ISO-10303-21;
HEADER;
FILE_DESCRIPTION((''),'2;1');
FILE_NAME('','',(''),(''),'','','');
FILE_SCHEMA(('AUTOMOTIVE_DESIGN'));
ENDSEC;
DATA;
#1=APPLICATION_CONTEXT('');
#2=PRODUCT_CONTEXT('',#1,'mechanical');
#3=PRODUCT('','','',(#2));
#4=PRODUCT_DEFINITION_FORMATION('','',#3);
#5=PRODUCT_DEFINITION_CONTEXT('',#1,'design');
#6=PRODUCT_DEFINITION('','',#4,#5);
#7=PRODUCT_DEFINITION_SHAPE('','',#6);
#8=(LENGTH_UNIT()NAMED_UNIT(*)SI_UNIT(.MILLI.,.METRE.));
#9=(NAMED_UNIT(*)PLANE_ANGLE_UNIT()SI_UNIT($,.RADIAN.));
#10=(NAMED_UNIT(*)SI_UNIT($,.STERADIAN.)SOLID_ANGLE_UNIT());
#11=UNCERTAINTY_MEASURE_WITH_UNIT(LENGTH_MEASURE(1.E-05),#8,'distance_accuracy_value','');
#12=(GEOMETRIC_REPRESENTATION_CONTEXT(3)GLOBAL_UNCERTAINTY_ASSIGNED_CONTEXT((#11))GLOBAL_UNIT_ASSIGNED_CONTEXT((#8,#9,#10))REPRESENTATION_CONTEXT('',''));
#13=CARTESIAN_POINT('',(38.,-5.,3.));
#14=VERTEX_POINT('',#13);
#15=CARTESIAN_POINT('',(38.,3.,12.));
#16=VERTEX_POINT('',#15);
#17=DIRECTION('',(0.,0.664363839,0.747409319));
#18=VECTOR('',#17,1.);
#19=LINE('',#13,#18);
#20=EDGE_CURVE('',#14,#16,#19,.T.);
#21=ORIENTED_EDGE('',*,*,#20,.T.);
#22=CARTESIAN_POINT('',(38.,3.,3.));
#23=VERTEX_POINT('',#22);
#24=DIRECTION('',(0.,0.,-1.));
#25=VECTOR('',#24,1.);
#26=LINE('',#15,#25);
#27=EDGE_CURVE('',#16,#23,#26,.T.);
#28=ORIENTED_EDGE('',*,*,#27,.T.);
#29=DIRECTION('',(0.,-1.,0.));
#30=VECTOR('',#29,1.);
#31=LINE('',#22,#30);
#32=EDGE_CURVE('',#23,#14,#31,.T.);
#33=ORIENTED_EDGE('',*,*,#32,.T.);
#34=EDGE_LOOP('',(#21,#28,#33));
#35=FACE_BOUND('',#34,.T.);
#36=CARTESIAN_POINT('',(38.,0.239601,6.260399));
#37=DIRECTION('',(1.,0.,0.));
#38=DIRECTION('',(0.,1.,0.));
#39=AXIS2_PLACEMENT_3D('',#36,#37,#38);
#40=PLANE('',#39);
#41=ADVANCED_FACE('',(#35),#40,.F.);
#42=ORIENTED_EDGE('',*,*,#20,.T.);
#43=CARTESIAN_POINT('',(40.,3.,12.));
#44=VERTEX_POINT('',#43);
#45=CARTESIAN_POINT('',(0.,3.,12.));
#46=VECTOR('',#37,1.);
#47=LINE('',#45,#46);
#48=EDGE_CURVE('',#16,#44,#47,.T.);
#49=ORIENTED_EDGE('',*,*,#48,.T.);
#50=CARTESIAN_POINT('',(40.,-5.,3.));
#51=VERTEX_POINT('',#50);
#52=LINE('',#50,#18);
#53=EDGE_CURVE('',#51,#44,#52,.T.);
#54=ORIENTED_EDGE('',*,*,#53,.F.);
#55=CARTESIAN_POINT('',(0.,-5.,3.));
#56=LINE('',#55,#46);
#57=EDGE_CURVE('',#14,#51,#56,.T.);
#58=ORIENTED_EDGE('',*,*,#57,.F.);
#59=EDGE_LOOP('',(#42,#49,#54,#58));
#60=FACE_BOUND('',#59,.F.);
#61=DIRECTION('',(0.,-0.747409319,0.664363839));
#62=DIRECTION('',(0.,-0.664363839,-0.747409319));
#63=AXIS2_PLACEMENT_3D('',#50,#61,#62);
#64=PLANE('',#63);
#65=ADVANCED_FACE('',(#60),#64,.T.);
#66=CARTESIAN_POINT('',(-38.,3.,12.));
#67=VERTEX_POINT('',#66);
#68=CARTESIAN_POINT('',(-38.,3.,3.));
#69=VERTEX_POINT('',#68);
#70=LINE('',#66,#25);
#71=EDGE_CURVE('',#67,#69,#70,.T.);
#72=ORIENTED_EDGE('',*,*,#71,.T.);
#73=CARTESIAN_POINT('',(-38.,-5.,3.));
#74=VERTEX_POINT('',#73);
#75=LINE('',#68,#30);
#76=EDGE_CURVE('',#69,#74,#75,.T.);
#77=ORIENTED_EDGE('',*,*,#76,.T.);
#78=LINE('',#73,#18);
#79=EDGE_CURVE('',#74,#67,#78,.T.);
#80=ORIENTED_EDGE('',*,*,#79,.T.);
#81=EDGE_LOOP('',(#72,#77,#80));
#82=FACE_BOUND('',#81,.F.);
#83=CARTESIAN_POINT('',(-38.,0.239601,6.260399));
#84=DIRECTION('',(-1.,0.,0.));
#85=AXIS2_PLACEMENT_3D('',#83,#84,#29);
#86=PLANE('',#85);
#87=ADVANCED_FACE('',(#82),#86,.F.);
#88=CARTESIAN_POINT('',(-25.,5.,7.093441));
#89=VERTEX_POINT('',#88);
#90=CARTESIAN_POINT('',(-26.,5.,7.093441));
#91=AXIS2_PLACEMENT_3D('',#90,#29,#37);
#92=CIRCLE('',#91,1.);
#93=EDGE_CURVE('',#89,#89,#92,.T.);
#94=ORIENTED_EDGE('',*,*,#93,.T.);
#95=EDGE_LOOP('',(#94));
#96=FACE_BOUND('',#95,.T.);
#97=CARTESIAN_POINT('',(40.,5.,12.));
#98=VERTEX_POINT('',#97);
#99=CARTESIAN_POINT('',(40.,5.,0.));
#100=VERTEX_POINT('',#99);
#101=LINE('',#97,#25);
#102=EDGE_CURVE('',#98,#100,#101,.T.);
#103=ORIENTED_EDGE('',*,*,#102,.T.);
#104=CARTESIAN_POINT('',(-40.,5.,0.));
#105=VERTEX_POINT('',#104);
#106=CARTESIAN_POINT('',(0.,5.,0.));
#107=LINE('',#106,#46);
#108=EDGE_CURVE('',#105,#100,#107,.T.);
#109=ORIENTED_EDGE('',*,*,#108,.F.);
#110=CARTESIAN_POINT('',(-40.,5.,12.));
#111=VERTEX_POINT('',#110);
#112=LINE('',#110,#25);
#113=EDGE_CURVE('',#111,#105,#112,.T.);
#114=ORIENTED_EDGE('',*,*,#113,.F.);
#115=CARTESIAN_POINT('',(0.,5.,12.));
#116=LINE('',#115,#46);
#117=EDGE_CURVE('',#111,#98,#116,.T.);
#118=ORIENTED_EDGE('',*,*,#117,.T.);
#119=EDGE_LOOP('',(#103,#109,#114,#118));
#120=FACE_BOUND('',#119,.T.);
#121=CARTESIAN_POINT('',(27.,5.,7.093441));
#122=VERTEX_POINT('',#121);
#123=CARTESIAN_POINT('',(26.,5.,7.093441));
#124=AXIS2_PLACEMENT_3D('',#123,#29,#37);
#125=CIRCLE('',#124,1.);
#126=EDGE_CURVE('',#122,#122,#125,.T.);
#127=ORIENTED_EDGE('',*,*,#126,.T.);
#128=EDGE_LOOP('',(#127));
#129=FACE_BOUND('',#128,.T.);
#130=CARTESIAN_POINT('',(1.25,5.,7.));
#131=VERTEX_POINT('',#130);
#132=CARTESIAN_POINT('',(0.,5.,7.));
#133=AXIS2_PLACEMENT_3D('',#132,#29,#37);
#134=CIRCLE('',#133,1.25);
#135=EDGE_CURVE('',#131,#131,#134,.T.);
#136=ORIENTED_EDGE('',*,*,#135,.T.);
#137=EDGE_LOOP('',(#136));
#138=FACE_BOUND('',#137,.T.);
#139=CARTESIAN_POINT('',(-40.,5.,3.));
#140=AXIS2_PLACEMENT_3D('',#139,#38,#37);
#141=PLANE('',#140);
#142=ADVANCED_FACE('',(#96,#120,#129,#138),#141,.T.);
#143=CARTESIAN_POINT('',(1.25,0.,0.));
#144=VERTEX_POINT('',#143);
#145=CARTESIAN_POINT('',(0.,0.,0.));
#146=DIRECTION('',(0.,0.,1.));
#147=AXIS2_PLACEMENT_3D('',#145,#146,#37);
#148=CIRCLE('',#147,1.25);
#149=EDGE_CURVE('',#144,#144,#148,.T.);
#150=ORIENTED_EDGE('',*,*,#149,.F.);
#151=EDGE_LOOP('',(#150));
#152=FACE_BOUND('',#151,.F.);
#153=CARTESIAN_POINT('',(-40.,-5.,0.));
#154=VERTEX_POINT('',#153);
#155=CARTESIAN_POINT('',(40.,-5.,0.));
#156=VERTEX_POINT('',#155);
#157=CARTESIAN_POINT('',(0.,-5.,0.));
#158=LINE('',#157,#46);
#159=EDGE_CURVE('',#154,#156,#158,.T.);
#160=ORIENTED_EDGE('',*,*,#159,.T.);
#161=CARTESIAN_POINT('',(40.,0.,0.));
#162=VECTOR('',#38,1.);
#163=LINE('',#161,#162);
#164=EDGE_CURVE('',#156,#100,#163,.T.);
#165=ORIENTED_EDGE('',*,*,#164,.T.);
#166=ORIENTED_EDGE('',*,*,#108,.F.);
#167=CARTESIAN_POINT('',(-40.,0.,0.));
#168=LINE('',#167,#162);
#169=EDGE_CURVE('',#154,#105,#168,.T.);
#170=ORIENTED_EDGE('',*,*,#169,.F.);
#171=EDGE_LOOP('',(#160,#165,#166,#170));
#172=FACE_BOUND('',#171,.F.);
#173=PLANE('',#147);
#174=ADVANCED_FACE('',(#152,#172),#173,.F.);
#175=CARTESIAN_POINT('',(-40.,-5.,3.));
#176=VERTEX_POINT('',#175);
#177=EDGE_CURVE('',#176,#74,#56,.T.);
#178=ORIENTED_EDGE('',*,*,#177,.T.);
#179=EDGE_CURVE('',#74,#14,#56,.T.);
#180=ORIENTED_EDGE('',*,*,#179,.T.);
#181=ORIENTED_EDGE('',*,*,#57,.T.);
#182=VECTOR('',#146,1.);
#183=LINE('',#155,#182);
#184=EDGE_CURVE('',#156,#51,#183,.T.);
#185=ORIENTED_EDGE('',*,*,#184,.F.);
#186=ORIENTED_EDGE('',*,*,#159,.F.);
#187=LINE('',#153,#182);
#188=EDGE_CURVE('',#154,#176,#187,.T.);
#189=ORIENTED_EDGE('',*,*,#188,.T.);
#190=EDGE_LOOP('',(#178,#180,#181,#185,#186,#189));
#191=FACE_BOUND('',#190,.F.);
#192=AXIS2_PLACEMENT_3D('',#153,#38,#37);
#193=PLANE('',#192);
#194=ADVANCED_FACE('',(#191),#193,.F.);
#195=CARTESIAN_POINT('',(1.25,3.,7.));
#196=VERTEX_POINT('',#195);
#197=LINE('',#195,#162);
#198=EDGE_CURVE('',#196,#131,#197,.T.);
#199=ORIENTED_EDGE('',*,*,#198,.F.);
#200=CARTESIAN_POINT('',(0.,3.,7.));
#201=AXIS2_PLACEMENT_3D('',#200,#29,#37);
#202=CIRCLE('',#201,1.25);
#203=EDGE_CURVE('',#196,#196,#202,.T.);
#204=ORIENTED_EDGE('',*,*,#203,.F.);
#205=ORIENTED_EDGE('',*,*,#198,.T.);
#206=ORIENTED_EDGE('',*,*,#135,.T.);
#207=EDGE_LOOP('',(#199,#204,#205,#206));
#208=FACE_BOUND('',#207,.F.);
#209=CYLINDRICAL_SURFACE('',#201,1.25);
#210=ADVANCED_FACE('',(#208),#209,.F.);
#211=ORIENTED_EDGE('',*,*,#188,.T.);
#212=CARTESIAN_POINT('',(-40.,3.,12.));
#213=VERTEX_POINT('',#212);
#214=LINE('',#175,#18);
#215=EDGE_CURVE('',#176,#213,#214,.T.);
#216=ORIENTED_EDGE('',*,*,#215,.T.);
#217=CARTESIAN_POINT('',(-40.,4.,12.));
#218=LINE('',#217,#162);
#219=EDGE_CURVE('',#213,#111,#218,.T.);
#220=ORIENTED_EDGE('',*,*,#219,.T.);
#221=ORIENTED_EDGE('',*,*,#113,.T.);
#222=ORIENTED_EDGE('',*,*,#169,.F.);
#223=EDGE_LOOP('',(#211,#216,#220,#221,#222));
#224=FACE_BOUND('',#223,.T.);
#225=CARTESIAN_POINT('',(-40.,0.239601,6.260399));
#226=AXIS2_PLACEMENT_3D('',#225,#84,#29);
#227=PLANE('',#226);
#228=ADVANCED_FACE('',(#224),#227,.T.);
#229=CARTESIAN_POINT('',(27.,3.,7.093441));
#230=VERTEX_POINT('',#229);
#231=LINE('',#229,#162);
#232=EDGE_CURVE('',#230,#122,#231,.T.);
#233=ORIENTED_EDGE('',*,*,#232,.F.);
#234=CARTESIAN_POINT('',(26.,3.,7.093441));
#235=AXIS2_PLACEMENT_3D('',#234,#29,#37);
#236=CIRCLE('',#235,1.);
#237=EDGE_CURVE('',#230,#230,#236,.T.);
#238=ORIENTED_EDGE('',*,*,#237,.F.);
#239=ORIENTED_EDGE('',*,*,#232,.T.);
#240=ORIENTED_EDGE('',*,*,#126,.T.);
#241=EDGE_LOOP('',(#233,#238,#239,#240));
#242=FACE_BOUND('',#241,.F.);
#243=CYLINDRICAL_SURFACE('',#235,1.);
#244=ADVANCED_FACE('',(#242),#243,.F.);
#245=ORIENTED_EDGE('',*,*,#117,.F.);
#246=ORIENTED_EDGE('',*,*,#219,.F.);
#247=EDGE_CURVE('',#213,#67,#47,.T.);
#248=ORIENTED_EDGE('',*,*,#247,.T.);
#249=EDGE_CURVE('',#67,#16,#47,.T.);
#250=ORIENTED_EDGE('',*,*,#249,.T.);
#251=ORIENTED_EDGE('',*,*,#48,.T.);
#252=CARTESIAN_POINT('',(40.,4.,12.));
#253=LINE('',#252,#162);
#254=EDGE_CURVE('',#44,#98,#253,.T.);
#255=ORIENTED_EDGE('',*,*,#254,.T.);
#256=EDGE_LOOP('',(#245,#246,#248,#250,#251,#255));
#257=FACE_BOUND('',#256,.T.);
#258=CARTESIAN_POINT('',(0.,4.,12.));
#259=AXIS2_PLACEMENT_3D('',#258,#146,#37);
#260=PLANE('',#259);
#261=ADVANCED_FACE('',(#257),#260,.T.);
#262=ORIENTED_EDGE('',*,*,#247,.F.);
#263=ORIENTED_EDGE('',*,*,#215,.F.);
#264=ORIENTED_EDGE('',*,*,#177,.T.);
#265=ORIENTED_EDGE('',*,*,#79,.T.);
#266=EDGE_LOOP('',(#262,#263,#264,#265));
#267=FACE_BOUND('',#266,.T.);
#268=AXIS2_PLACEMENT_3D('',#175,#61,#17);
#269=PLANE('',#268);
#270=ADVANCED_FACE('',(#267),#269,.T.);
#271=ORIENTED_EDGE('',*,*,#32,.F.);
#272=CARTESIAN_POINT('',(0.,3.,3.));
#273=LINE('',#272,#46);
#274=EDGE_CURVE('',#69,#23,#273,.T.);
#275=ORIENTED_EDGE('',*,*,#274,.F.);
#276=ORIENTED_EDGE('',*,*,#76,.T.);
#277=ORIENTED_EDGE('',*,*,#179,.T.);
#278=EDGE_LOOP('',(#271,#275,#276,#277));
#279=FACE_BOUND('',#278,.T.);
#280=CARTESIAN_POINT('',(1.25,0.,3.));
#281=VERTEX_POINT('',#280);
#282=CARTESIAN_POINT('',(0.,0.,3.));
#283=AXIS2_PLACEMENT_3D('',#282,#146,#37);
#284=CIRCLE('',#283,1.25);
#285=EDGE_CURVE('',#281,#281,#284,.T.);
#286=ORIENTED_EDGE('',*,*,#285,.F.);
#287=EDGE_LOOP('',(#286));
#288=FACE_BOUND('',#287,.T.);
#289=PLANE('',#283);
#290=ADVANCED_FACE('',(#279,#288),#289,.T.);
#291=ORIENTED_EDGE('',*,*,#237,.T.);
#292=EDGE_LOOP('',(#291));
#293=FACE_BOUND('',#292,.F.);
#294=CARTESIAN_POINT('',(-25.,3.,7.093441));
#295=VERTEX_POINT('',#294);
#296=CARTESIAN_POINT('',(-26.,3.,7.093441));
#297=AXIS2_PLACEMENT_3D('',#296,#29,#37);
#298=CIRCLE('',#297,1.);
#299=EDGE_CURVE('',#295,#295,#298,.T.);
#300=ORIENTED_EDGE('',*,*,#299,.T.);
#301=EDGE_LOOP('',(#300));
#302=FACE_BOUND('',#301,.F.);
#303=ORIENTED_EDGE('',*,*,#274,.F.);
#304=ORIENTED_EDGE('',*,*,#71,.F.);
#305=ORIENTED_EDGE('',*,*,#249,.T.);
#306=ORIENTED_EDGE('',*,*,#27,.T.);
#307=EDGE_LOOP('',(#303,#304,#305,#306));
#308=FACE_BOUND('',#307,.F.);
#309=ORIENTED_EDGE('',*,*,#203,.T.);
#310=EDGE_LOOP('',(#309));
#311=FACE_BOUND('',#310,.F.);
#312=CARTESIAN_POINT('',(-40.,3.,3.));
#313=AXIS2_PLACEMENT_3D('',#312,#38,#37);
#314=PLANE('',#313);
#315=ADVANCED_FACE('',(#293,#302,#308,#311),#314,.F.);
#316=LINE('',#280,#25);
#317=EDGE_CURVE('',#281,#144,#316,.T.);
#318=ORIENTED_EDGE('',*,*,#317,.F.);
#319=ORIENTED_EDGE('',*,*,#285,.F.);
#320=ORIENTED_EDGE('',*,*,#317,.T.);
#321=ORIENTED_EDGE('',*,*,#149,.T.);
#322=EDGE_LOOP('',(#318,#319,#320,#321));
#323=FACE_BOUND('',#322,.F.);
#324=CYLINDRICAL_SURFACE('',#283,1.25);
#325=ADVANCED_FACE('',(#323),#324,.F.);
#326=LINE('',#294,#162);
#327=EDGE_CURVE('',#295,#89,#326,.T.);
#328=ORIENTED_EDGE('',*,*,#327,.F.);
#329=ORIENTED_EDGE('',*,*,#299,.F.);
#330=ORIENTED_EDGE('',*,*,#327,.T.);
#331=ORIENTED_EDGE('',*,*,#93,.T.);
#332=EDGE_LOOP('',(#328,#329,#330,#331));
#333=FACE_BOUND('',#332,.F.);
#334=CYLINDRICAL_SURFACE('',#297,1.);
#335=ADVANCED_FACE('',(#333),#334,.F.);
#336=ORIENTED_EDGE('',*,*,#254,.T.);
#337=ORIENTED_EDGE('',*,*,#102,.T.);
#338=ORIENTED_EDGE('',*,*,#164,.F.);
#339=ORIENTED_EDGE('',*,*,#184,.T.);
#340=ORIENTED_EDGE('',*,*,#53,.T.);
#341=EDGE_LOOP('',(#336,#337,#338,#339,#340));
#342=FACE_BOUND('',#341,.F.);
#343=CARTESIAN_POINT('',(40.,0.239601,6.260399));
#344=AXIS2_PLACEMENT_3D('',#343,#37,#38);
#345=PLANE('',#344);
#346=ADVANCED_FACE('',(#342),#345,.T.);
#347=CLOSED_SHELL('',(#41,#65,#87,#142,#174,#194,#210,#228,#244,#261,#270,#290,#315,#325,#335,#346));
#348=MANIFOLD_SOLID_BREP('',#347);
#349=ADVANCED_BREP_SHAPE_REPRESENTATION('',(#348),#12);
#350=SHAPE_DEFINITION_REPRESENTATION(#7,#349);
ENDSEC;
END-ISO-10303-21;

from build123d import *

# Parameters (mm, degrees)
F0_W      = 80
F0_H      = 10
F1_DEPTH  = 3
F2_W      = 80
F2_H      = 2
F3_DEPTH  = 9
F4_R      = 1.25
F5_DEPTH  = 3.001
F6_R      = 1.25
F7_DEPTH  = 2.001
F9_DEPTH  = 2
F10_R     = 1
F11_DEPTH = 2.001


# Not quite as in the source:
# - a pattern or mirror of a feature is missing from the dataset's text; its kind, count and spacing are read off the source's solid


with BuildPart() as f1:
    # F0 (on Top) → F1 (new body)
    with BuildSketch(Plane.XY):
        Rectangle(F0_W, F0_H)
    extrude(amount=F1_DEPTH)

    # F2 (on face) → F3 (join)
    with BuildSketch(Plane.XY.offset(3)):
        with Locations((0, 4)):
            Rectangle(F2_W, F2_H)
    extrude(amount=F3_DEPTH)

    # F4 (on face) → F5 (cut, through all)
    with BuildSketch(Plane.XY.offset(3)):
        Circle(F4_R)
    extrude(amount=-F5_DEPTH, mode=Mode.SUBTRACT)

    # F6 (on face) → F7 (cut, through all)
    with BuildSketch(Plane.XZ.offset(-3)):
        with Locations((0, 7)):
            Circle(F6_R)
    extrude(amount=-F7_DEPTH, mode=Mode.SUBTRACT)

    # F8 (on face) → F9 (join)
    with BuildSketch(Plane(origin=(-40, 0, 0), x_dir=(0, -1, 0), z_dir=(-1, 0, 0))):
        Polygon((5, 3), (-3, 12), (-3, 3), align=None)
    f9 = extrude(amount=-F9_DEPTH)

    # F9_copies: F9 across plane
    add(f9.mirror(Plane(origin=(0, 0, 0), x_dir=(0, 0, 1), z_dir=(1, 0, 0))))

    # F10 (on face) → F11 (cut, through all)
    with BuildSketch(Plane.XZ.offset(-3)):
        with Locations((-26, 7.0934407413)):
            Circle(F10_R)
        with Locations((26, 7.0934407413)):
            Circle(F10_R)
    extrude(amount=-F11_DEPTH, mode=Mode.SUBTRACT)


solid = f1.part
